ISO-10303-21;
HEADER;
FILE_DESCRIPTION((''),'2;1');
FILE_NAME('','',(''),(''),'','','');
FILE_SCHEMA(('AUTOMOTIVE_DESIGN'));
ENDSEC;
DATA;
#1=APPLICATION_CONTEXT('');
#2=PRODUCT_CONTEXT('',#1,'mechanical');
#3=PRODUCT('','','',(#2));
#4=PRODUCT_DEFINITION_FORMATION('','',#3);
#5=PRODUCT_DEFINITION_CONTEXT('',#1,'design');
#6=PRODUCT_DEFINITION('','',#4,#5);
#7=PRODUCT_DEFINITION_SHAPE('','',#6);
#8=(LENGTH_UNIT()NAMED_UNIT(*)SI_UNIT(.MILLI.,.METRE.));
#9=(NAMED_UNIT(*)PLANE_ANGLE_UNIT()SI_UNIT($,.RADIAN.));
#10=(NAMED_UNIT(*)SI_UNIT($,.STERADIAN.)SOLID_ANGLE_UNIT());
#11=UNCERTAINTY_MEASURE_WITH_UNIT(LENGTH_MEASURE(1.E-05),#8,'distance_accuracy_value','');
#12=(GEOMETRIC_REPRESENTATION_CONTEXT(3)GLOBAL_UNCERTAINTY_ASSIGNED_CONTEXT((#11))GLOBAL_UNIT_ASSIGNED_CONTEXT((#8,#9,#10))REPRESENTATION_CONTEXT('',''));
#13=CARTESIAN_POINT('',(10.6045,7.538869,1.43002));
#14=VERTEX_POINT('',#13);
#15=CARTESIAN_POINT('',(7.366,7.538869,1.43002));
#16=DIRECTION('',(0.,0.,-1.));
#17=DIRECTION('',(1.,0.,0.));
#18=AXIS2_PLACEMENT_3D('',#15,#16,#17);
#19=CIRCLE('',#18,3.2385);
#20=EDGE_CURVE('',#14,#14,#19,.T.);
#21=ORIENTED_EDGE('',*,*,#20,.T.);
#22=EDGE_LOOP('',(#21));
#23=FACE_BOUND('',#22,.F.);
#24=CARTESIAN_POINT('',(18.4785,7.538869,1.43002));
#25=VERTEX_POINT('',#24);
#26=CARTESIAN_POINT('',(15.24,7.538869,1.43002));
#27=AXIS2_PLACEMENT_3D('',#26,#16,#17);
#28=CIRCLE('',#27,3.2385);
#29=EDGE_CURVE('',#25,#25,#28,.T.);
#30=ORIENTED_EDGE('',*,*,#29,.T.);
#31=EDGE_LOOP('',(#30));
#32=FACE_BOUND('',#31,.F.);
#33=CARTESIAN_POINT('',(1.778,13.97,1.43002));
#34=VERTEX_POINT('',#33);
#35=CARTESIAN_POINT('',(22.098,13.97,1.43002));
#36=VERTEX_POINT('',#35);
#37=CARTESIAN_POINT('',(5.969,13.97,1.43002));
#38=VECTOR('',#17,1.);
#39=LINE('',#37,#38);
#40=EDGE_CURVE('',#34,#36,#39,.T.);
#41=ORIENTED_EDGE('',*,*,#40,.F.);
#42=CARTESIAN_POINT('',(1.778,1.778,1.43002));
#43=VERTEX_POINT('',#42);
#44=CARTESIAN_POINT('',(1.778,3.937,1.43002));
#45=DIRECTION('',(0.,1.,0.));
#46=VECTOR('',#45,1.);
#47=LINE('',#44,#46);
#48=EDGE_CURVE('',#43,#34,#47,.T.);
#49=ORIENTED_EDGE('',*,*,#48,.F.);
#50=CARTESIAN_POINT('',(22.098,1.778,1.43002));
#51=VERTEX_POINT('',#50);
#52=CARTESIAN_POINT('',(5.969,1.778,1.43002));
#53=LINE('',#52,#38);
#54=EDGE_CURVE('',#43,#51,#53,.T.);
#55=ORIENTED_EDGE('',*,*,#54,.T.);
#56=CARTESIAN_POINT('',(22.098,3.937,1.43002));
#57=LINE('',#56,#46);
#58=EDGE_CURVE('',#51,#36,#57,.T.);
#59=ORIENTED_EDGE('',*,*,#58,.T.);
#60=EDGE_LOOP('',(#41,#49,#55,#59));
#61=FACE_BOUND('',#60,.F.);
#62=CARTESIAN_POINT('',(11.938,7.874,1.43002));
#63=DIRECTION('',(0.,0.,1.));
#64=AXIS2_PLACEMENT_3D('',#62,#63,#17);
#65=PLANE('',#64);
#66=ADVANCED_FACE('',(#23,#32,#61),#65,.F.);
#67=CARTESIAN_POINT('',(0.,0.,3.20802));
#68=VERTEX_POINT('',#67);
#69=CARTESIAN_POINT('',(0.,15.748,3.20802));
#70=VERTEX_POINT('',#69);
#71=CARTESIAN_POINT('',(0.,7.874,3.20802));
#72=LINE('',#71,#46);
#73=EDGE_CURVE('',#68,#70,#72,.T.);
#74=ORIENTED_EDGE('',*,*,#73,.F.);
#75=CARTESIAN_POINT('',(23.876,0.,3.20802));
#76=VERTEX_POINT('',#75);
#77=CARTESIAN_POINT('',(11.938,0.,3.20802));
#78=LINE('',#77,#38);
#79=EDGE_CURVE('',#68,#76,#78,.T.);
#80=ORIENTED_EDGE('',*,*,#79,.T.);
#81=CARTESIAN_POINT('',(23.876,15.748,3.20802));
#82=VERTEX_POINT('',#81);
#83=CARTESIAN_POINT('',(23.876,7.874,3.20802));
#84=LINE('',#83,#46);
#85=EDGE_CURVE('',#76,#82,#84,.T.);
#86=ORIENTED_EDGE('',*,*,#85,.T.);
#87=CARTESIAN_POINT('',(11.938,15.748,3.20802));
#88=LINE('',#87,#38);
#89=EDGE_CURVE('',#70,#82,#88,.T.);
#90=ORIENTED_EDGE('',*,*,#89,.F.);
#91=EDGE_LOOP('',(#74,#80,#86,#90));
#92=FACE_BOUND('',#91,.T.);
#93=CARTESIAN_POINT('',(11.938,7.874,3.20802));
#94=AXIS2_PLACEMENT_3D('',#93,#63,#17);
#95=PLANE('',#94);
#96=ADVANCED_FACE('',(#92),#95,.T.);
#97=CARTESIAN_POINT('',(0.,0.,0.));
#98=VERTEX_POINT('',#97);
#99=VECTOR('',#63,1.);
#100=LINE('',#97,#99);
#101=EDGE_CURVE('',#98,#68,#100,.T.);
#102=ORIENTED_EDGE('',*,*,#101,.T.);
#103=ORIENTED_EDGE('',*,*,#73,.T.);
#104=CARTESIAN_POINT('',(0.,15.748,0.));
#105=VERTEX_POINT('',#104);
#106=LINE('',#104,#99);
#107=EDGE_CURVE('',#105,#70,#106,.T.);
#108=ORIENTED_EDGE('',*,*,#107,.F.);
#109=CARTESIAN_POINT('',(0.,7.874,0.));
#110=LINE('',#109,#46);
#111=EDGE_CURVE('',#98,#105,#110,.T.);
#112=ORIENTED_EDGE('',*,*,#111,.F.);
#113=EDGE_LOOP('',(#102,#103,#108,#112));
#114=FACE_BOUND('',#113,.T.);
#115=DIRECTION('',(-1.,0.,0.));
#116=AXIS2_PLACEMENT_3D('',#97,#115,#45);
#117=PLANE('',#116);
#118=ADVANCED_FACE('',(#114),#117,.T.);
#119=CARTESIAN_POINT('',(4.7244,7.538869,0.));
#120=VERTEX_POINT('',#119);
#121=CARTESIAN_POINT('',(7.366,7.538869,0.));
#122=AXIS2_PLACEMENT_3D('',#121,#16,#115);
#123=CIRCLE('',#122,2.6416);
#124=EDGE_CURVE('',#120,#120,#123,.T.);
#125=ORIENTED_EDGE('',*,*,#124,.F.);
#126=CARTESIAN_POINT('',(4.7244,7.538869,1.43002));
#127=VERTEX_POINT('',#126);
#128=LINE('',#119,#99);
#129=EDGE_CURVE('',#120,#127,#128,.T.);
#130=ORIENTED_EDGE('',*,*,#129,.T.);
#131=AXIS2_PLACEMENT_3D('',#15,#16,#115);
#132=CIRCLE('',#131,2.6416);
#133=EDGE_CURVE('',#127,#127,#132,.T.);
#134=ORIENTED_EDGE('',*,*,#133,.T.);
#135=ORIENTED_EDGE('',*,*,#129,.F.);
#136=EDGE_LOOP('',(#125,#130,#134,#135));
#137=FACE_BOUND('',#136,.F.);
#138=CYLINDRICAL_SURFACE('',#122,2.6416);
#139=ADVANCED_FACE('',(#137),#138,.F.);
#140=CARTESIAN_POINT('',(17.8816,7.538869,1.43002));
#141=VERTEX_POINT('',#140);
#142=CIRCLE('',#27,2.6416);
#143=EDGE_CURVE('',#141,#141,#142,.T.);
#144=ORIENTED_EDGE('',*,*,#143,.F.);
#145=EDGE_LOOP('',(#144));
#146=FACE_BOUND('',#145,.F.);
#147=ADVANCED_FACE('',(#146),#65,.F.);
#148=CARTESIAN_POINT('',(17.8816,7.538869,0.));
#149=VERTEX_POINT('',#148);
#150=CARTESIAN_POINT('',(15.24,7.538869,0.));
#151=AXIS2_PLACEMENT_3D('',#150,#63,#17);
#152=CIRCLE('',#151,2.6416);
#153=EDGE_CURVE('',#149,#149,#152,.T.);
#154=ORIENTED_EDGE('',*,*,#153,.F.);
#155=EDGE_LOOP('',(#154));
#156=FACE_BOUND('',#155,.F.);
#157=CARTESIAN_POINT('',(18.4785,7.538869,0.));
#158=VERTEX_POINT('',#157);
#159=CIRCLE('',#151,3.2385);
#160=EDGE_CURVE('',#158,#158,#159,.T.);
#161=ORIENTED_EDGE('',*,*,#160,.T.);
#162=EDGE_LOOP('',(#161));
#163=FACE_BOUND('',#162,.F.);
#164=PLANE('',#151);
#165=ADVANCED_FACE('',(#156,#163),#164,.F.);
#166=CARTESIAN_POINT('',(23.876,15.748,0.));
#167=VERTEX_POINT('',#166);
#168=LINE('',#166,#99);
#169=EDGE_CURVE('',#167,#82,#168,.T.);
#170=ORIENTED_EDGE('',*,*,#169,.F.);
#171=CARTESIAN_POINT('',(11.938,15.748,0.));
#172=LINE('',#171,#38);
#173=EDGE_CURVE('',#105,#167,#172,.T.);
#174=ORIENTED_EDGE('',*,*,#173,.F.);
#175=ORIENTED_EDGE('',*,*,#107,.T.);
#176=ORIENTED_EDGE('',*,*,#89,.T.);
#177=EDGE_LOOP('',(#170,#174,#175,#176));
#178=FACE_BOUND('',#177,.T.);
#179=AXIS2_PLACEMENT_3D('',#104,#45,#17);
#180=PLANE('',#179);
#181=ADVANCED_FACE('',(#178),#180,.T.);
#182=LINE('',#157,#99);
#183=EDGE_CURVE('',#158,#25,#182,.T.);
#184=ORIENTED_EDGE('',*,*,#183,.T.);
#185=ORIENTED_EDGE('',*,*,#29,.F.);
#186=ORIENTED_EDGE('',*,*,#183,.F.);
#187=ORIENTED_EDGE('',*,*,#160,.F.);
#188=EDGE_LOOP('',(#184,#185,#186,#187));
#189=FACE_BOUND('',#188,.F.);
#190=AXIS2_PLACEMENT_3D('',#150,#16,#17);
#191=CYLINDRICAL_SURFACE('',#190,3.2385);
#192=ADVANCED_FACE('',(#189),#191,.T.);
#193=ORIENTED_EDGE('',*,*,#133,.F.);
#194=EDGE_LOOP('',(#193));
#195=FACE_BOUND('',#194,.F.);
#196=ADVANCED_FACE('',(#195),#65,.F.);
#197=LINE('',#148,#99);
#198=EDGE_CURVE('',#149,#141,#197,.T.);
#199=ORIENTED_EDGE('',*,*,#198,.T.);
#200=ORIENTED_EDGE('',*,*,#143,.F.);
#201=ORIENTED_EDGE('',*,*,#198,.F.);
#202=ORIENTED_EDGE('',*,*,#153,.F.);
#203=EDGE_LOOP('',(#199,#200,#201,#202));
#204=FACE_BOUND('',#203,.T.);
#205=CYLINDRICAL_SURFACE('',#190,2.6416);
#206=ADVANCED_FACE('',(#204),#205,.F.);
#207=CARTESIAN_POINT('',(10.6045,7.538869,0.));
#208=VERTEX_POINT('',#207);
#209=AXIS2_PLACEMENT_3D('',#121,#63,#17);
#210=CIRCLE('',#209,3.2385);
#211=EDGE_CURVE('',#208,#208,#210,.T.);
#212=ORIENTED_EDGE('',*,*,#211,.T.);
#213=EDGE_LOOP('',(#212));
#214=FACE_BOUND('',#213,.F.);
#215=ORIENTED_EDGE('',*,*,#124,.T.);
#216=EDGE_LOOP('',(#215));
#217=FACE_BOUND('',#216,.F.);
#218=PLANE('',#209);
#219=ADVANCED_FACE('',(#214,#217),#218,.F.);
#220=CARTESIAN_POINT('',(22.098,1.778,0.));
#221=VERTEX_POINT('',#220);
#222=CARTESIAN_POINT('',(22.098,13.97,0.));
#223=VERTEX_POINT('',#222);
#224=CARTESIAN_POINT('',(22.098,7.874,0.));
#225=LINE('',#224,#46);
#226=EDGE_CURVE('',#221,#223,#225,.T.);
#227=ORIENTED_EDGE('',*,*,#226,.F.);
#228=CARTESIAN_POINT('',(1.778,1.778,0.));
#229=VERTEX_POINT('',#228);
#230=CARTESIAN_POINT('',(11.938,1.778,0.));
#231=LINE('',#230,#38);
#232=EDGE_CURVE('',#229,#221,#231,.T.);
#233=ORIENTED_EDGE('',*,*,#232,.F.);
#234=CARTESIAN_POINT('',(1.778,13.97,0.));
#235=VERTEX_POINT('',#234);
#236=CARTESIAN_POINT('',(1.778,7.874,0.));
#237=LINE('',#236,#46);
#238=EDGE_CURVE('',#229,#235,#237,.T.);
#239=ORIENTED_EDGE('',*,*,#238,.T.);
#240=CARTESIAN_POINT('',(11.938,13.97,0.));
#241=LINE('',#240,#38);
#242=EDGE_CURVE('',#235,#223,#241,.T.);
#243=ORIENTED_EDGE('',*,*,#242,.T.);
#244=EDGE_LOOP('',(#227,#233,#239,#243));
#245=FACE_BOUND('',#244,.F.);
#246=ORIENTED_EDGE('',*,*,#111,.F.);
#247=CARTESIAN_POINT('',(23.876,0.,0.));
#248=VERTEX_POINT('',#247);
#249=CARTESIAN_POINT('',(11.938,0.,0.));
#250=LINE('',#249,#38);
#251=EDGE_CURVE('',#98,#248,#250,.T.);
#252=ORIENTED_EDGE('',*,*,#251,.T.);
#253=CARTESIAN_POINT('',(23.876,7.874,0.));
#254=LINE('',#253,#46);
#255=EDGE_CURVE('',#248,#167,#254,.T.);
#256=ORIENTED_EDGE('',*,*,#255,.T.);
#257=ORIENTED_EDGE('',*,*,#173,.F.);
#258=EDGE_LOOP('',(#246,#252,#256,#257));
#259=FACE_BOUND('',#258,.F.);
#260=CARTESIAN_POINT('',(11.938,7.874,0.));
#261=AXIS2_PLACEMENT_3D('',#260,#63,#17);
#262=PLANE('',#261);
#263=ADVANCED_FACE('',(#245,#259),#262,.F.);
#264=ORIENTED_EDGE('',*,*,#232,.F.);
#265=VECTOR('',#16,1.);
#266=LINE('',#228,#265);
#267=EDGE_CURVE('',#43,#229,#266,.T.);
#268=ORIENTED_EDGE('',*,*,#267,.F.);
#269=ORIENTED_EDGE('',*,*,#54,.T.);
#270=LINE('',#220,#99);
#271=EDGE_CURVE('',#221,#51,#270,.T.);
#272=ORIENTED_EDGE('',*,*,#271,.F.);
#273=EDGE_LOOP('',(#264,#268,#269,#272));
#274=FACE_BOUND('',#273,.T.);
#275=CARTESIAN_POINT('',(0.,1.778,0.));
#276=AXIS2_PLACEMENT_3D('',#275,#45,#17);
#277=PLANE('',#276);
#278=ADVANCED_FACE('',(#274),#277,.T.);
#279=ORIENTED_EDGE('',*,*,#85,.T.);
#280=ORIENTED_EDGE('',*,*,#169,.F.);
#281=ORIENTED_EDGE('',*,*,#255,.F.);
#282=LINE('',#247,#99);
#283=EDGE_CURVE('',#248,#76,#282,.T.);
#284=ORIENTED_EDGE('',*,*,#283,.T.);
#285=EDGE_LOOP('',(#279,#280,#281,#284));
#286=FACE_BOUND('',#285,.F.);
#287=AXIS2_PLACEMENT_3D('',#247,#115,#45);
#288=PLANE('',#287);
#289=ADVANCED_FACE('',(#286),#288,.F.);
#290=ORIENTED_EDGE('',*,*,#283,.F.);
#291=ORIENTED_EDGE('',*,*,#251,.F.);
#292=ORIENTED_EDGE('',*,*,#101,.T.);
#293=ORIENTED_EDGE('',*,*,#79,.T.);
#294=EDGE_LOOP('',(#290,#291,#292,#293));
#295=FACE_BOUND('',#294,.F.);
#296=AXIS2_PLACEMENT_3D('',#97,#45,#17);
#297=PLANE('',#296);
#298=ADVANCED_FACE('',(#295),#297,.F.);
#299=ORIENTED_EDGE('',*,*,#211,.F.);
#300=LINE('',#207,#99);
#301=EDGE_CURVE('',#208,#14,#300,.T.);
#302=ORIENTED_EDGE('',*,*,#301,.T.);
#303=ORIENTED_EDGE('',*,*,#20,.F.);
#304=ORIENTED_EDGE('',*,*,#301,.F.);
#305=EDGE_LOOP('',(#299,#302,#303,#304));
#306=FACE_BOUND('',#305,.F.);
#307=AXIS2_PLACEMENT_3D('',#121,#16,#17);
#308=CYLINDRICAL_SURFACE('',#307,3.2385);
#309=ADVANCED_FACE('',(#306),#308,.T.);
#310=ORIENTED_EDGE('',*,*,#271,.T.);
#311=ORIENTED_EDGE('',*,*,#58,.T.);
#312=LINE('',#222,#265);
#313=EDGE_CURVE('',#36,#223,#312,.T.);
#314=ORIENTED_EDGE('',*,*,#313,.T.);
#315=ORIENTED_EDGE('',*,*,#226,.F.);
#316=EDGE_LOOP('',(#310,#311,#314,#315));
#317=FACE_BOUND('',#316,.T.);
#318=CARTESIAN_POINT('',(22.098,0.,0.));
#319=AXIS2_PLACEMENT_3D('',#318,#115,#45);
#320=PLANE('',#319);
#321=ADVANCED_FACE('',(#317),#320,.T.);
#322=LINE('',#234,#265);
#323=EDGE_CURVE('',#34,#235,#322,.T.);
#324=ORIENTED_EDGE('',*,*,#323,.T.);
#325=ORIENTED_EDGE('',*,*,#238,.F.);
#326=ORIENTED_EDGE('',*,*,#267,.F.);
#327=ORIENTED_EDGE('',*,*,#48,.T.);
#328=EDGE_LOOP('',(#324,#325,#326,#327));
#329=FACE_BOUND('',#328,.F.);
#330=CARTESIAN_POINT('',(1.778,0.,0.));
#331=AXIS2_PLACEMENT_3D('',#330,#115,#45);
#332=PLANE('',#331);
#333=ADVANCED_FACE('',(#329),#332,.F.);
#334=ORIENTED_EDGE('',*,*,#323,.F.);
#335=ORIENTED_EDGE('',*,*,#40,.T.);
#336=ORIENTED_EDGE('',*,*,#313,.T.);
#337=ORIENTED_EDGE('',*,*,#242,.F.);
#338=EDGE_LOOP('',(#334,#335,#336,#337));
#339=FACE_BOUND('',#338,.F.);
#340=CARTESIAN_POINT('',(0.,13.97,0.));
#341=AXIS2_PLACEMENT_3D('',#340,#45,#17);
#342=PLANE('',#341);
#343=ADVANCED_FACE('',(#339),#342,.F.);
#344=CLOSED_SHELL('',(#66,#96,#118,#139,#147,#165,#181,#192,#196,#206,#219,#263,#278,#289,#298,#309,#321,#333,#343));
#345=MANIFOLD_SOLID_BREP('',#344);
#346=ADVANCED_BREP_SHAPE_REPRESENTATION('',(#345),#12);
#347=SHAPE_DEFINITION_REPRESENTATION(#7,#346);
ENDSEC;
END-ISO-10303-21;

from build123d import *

# Parameters (mm, degrees)
F0_W     = 23.876
F0_H     = 15.748
F1_DEPTH = 3.20802
F3_T     = -1.778
F4_R     = 3.2385
F4_R_2   = 2.6416
F5_DEPTH = 3.06898


# Not quite as in the source:
# - a feature names something its author has since deleted; it is built from what else it names


with BuildPart() as f1:
    # F0 (on Top) → F1 (new body)
    with BuildSketch(Plane.XY):
        with Locations((11.938, 7.874)):
            Rectangle(F0_W, F0_H)
    extrude(amount=F1_DEPTH)

    # F3
    f3_openings = [f1.faces().sort_by_distance(p)[0] for p in [
        (11.938, 7.874, 0),
    ]]
    offset(amount=F3_T, openings=f3_openings)

    # F4 (on face) → F5 (join)
    with BuildSketch(Plane.XY):
        with BuildLine():
            ThreePointArc((4.1275, 7.5388690457), (7.366, 4.3003690457), (10.6045, 7.5388690457))
            ThreePointArc((10.6045, 7.5388690457), (7.366, 10.7773690457), (4.1275, 7.5388690457))
        make_face()
        with BuildLine():
            ThreePointArc((10.0076, 7.5388690457), (7.366, 4.8972690457), (4.7244, 7.5388690457))
            ThreePointArc((4.7244, 7.5388690457), (7.366, 10.1804690457), (10.0076, 7.5388690457))
        make_face(mode=Mode.SUBTRACT)
        with Locations((15.24, 7.5388690457)):
            Circle(F4_R)
        with Locations((15.24, 7.5388690457)):
            Circle(F4_R_2, mode=Mode.SUBTRACT)
    extrude(amount=F5_DEPTH)


solid = f1.part
